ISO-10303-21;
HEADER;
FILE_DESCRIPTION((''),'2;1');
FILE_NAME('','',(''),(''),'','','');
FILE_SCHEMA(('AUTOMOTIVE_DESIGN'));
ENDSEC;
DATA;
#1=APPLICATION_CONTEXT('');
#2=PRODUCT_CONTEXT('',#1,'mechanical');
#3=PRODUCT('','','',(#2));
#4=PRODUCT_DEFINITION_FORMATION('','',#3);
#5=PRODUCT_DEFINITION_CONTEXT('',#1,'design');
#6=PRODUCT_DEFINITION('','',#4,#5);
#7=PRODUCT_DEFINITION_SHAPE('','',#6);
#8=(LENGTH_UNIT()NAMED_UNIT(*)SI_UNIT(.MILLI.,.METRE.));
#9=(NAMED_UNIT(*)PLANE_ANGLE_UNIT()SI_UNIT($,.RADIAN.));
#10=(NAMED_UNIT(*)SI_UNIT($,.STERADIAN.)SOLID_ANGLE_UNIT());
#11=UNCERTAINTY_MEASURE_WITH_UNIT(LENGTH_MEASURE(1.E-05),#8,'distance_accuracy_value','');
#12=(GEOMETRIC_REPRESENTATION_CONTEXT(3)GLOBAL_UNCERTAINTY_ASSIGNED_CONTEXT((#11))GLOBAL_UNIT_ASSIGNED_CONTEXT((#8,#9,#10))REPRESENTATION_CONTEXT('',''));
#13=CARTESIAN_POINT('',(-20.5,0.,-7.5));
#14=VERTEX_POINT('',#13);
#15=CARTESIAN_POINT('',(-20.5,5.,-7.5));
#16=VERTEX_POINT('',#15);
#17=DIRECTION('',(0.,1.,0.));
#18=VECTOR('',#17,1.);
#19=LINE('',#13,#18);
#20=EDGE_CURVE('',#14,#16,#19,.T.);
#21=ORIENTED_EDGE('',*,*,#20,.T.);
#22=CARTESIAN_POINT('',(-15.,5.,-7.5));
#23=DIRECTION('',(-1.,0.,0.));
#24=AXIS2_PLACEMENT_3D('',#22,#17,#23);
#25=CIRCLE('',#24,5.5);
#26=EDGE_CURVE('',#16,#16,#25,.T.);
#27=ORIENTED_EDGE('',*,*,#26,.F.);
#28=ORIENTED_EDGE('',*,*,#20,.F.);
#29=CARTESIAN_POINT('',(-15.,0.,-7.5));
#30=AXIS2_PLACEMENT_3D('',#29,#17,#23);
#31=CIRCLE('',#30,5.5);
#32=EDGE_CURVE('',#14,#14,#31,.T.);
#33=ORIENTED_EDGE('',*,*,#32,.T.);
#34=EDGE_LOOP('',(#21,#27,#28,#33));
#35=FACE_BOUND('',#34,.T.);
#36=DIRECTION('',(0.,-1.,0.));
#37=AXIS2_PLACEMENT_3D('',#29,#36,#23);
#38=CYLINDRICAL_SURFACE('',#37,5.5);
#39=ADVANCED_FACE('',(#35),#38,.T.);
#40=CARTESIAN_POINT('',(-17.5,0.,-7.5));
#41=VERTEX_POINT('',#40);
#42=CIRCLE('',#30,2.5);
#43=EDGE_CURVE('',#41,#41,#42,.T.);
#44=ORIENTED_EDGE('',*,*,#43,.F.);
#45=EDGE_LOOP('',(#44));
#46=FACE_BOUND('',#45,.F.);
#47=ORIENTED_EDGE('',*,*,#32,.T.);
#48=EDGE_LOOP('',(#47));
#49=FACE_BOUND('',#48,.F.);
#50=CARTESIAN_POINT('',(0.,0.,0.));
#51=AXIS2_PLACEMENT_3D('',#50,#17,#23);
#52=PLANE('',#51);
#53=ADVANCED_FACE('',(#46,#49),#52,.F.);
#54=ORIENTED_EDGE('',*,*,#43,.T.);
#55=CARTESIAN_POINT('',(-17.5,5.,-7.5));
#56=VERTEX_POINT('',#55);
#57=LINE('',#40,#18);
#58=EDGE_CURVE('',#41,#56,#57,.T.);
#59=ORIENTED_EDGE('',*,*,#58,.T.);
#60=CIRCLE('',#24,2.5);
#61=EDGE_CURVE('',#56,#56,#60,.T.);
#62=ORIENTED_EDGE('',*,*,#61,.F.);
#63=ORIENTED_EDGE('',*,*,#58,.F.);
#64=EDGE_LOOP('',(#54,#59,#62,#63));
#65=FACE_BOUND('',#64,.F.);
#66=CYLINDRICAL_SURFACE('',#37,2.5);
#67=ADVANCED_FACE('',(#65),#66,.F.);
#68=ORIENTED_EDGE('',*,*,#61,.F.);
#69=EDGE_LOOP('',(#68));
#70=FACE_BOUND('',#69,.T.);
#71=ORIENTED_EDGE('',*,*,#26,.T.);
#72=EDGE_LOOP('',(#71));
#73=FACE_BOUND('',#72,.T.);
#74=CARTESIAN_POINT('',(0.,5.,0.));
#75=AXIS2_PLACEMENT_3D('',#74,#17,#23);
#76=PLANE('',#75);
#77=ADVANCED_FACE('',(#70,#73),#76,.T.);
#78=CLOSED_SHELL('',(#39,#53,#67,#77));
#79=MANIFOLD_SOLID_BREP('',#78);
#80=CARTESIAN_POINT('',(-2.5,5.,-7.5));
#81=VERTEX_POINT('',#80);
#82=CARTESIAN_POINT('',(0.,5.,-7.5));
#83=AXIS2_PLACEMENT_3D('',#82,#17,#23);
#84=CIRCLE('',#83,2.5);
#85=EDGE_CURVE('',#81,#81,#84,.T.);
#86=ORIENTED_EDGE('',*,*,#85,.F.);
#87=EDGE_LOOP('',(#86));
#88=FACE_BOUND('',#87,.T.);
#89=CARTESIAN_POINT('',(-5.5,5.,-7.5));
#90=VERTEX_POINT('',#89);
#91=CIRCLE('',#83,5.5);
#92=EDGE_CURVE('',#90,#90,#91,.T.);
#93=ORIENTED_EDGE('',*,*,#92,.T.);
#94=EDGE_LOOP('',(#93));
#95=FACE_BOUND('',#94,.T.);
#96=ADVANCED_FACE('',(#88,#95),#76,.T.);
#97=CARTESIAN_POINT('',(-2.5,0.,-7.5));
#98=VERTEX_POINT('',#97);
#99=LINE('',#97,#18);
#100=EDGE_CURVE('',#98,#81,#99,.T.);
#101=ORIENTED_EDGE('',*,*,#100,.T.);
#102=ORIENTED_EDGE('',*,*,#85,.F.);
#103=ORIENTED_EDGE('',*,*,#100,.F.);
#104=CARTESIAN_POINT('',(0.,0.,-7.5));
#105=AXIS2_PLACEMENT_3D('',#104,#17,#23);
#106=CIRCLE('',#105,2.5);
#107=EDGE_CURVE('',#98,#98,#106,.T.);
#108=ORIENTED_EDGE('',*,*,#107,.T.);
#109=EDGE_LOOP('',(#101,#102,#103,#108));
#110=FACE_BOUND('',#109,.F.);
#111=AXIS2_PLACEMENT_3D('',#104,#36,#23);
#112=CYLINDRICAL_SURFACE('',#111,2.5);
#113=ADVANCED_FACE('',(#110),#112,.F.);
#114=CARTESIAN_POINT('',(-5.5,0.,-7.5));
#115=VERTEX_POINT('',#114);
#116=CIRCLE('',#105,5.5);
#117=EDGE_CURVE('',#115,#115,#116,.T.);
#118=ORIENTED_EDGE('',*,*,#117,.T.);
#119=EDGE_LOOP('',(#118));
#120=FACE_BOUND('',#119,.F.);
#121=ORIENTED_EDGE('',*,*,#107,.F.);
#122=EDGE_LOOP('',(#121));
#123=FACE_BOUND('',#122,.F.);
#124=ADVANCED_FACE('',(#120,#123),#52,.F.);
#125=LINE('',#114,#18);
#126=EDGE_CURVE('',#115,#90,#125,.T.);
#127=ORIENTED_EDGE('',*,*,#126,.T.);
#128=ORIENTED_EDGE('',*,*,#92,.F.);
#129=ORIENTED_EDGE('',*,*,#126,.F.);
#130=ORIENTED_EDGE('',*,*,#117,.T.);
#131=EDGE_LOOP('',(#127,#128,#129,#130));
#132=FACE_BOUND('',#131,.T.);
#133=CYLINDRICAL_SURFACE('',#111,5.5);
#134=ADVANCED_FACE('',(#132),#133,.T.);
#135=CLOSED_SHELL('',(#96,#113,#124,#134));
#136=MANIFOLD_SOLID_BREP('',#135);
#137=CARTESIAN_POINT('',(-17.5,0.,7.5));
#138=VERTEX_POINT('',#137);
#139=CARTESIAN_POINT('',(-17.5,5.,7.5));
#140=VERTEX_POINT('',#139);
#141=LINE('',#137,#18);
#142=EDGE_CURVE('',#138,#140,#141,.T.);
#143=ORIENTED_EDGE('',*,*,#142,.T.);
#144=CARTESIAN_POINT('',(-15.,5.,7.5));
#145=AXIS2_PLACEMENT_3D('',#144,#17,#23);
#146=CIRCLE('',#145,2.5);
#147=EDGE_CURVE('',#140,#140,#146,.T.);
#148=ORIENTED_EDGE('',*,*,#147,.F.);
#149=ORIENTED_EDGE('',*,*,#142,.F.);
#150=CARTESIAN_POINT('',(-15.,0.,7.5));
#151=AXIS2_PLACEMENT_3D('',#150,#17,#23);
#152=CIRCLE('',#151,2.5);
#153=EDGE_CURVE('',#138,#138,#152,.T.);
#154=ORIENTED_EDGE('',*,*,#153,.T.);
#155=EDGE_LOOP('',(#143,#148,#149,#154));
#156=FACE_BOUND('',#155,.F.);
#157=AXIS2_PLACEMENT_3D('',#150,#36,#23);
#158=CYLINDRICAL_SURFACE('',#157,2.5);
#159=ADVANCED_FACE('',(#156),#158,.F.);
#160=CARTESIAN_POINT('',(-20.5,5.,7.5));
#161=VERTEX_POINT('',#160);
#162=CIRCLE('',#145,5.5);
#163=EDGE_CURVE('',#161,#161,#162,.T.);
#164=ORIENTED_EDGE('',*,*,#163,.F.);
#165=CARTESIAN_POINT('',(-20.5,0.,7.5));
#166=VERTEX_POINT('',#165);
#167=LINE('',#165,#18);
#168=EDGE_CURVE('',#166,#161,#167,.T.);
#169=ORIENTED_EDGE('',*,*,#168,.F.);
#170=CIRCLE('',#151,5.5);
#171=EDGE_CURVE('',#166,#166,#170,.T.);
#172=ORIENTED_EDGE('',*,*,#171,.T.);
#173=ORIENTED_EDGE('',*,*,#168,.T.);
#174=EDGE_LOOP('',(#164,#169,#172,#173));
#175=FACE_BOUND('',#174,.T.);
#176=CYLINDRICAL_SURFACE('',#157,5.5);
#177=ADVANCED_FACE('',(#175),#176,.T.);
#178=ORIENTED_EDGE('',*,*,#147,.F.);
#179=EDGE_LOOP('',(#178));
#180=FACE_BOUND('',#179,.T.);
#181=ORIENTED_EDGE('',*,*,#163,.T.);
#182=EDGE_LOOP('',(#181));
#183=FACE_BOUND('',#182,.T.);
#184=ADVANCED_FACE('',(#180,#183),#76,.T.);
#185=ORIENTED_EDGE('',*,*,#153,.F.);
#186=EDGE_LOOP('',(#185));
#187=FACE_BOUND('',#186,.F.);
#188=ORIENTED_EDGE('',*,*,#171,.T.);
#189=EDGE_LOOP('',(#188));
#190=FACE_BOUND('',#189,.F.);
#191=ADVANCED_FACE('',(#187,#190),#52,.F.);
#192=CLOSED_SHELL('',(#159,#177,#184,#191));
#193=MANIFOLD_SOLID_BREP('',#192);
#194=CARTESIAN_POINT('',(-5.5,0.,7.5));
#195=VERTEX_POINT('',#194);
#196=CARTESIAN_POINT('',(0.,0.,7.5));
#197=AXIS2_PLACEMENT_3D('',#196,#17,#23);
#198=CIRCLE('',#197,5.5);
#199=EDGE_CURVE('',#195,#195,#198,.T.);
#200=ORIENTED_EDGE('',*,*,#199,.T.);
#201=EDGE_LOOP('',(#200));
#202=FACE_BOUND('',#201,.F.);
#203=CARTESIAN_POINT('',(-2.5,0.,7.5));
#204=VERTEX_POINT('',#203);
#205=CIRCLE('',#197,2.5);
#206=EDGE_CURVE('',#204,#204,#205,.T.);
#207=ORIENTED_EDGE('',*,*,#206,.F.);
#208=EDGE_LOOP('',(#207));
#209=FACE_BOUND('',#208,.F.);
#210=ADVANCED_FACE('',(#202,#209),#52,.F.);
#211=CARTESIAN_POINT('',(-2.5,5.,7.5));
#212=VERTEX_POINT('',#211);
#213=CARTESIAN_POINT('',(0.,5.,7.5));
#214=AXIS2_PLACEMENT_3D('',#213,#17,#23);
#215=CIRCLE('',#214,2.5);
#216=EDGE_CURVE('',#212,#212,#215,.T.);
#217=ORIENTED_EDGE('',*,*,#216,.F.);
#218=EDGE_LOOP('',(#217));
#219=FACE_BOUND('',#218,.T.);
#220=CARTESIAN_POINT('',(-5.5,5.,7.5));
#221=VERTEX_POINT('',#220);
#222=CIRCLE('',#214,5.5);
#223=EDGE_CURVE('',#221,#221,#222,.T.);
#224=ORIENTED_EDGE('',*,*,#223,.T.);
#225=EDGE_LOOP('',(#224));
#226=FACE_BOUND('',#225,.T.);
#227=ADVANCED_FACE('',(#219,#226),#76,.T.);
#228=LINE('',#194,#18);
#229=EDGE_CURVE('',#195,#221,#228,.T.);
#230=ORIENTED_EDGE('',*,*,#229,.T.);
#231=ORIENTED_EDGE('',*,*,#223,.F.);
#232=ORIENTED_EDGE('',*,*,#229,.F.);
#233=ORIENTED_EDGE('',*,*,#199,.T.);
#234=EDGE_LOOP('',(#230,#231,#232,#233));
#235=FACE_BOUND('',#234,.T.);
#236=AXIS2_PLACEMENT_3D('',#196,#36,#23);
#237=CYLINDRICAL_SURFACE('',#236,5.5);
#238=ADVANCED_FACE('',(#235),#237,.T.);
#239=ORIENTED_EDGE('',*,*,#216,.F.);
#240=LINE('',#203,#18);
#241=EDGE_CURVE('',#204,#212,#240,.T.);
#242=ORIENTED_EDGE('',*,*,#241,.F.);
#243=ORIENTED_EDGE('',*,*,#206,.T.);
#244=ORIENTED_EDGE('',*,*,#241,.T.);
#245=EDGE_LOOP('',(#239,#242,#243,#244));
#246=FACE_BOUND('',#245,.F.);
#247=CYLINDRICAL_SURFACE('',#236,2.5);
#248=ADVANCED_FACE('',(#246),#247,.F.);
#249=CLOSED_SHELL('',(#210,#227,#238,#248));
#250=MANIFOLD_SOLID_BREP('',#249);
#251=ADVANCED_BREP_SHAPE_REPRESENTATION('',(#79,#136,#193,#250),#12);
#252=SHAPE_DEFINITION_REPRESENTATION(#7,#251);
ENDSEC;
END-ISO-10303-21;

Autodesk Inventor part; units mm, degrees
ref_plane "YZ Plane" through (0, 0, 0) normal (1, 0, 0) x (0, 1, 0)
ref_plane "XZ Plane" through (0, 0, 0) normal (0, 1, 0) x (-1, 0, 0)
ref_plane "XY Plane" through (0, 0, 0) normal (0, 0, 1) x (1, 0, 0)
sketch "Sketch1" plane through (0, 0, 0) normal (0, 1, 0) x (-1, 0, 0)
  circle A0 centre (0, 7.5) radius 5.5
  circle A1 centre (0, 7.5) radius 2.5
  line L0 (0, 7.5) -> (7.5, 7.5)
  line L1 (7.5, 7.5) -> (7.5, 0)
  circle A2 centre (15, 7.5) radius 5.5
  circle A3 centre (15, 7.5) radius 2.5
  line L2 (0, 0) -> (7.5, 0)
  circle A4 centre (0, -7.5) radius 5.5
  circle A5 centre (0, -7.5) radius 2.5
  circle A6 centre (15, -7.5) radius 5.5
  circle A7 centre (15, -7.5) radius 2.5
  dimension "d0" = 11
  dimension "d1" = 7.5
  dimension "d2" = 5
  dimension "d3" = 7.5
extrude "Extrusion1" add sketch "Sketch1" along normal blind 5
properties part number "Gripper_Gen3_BearingArray"
